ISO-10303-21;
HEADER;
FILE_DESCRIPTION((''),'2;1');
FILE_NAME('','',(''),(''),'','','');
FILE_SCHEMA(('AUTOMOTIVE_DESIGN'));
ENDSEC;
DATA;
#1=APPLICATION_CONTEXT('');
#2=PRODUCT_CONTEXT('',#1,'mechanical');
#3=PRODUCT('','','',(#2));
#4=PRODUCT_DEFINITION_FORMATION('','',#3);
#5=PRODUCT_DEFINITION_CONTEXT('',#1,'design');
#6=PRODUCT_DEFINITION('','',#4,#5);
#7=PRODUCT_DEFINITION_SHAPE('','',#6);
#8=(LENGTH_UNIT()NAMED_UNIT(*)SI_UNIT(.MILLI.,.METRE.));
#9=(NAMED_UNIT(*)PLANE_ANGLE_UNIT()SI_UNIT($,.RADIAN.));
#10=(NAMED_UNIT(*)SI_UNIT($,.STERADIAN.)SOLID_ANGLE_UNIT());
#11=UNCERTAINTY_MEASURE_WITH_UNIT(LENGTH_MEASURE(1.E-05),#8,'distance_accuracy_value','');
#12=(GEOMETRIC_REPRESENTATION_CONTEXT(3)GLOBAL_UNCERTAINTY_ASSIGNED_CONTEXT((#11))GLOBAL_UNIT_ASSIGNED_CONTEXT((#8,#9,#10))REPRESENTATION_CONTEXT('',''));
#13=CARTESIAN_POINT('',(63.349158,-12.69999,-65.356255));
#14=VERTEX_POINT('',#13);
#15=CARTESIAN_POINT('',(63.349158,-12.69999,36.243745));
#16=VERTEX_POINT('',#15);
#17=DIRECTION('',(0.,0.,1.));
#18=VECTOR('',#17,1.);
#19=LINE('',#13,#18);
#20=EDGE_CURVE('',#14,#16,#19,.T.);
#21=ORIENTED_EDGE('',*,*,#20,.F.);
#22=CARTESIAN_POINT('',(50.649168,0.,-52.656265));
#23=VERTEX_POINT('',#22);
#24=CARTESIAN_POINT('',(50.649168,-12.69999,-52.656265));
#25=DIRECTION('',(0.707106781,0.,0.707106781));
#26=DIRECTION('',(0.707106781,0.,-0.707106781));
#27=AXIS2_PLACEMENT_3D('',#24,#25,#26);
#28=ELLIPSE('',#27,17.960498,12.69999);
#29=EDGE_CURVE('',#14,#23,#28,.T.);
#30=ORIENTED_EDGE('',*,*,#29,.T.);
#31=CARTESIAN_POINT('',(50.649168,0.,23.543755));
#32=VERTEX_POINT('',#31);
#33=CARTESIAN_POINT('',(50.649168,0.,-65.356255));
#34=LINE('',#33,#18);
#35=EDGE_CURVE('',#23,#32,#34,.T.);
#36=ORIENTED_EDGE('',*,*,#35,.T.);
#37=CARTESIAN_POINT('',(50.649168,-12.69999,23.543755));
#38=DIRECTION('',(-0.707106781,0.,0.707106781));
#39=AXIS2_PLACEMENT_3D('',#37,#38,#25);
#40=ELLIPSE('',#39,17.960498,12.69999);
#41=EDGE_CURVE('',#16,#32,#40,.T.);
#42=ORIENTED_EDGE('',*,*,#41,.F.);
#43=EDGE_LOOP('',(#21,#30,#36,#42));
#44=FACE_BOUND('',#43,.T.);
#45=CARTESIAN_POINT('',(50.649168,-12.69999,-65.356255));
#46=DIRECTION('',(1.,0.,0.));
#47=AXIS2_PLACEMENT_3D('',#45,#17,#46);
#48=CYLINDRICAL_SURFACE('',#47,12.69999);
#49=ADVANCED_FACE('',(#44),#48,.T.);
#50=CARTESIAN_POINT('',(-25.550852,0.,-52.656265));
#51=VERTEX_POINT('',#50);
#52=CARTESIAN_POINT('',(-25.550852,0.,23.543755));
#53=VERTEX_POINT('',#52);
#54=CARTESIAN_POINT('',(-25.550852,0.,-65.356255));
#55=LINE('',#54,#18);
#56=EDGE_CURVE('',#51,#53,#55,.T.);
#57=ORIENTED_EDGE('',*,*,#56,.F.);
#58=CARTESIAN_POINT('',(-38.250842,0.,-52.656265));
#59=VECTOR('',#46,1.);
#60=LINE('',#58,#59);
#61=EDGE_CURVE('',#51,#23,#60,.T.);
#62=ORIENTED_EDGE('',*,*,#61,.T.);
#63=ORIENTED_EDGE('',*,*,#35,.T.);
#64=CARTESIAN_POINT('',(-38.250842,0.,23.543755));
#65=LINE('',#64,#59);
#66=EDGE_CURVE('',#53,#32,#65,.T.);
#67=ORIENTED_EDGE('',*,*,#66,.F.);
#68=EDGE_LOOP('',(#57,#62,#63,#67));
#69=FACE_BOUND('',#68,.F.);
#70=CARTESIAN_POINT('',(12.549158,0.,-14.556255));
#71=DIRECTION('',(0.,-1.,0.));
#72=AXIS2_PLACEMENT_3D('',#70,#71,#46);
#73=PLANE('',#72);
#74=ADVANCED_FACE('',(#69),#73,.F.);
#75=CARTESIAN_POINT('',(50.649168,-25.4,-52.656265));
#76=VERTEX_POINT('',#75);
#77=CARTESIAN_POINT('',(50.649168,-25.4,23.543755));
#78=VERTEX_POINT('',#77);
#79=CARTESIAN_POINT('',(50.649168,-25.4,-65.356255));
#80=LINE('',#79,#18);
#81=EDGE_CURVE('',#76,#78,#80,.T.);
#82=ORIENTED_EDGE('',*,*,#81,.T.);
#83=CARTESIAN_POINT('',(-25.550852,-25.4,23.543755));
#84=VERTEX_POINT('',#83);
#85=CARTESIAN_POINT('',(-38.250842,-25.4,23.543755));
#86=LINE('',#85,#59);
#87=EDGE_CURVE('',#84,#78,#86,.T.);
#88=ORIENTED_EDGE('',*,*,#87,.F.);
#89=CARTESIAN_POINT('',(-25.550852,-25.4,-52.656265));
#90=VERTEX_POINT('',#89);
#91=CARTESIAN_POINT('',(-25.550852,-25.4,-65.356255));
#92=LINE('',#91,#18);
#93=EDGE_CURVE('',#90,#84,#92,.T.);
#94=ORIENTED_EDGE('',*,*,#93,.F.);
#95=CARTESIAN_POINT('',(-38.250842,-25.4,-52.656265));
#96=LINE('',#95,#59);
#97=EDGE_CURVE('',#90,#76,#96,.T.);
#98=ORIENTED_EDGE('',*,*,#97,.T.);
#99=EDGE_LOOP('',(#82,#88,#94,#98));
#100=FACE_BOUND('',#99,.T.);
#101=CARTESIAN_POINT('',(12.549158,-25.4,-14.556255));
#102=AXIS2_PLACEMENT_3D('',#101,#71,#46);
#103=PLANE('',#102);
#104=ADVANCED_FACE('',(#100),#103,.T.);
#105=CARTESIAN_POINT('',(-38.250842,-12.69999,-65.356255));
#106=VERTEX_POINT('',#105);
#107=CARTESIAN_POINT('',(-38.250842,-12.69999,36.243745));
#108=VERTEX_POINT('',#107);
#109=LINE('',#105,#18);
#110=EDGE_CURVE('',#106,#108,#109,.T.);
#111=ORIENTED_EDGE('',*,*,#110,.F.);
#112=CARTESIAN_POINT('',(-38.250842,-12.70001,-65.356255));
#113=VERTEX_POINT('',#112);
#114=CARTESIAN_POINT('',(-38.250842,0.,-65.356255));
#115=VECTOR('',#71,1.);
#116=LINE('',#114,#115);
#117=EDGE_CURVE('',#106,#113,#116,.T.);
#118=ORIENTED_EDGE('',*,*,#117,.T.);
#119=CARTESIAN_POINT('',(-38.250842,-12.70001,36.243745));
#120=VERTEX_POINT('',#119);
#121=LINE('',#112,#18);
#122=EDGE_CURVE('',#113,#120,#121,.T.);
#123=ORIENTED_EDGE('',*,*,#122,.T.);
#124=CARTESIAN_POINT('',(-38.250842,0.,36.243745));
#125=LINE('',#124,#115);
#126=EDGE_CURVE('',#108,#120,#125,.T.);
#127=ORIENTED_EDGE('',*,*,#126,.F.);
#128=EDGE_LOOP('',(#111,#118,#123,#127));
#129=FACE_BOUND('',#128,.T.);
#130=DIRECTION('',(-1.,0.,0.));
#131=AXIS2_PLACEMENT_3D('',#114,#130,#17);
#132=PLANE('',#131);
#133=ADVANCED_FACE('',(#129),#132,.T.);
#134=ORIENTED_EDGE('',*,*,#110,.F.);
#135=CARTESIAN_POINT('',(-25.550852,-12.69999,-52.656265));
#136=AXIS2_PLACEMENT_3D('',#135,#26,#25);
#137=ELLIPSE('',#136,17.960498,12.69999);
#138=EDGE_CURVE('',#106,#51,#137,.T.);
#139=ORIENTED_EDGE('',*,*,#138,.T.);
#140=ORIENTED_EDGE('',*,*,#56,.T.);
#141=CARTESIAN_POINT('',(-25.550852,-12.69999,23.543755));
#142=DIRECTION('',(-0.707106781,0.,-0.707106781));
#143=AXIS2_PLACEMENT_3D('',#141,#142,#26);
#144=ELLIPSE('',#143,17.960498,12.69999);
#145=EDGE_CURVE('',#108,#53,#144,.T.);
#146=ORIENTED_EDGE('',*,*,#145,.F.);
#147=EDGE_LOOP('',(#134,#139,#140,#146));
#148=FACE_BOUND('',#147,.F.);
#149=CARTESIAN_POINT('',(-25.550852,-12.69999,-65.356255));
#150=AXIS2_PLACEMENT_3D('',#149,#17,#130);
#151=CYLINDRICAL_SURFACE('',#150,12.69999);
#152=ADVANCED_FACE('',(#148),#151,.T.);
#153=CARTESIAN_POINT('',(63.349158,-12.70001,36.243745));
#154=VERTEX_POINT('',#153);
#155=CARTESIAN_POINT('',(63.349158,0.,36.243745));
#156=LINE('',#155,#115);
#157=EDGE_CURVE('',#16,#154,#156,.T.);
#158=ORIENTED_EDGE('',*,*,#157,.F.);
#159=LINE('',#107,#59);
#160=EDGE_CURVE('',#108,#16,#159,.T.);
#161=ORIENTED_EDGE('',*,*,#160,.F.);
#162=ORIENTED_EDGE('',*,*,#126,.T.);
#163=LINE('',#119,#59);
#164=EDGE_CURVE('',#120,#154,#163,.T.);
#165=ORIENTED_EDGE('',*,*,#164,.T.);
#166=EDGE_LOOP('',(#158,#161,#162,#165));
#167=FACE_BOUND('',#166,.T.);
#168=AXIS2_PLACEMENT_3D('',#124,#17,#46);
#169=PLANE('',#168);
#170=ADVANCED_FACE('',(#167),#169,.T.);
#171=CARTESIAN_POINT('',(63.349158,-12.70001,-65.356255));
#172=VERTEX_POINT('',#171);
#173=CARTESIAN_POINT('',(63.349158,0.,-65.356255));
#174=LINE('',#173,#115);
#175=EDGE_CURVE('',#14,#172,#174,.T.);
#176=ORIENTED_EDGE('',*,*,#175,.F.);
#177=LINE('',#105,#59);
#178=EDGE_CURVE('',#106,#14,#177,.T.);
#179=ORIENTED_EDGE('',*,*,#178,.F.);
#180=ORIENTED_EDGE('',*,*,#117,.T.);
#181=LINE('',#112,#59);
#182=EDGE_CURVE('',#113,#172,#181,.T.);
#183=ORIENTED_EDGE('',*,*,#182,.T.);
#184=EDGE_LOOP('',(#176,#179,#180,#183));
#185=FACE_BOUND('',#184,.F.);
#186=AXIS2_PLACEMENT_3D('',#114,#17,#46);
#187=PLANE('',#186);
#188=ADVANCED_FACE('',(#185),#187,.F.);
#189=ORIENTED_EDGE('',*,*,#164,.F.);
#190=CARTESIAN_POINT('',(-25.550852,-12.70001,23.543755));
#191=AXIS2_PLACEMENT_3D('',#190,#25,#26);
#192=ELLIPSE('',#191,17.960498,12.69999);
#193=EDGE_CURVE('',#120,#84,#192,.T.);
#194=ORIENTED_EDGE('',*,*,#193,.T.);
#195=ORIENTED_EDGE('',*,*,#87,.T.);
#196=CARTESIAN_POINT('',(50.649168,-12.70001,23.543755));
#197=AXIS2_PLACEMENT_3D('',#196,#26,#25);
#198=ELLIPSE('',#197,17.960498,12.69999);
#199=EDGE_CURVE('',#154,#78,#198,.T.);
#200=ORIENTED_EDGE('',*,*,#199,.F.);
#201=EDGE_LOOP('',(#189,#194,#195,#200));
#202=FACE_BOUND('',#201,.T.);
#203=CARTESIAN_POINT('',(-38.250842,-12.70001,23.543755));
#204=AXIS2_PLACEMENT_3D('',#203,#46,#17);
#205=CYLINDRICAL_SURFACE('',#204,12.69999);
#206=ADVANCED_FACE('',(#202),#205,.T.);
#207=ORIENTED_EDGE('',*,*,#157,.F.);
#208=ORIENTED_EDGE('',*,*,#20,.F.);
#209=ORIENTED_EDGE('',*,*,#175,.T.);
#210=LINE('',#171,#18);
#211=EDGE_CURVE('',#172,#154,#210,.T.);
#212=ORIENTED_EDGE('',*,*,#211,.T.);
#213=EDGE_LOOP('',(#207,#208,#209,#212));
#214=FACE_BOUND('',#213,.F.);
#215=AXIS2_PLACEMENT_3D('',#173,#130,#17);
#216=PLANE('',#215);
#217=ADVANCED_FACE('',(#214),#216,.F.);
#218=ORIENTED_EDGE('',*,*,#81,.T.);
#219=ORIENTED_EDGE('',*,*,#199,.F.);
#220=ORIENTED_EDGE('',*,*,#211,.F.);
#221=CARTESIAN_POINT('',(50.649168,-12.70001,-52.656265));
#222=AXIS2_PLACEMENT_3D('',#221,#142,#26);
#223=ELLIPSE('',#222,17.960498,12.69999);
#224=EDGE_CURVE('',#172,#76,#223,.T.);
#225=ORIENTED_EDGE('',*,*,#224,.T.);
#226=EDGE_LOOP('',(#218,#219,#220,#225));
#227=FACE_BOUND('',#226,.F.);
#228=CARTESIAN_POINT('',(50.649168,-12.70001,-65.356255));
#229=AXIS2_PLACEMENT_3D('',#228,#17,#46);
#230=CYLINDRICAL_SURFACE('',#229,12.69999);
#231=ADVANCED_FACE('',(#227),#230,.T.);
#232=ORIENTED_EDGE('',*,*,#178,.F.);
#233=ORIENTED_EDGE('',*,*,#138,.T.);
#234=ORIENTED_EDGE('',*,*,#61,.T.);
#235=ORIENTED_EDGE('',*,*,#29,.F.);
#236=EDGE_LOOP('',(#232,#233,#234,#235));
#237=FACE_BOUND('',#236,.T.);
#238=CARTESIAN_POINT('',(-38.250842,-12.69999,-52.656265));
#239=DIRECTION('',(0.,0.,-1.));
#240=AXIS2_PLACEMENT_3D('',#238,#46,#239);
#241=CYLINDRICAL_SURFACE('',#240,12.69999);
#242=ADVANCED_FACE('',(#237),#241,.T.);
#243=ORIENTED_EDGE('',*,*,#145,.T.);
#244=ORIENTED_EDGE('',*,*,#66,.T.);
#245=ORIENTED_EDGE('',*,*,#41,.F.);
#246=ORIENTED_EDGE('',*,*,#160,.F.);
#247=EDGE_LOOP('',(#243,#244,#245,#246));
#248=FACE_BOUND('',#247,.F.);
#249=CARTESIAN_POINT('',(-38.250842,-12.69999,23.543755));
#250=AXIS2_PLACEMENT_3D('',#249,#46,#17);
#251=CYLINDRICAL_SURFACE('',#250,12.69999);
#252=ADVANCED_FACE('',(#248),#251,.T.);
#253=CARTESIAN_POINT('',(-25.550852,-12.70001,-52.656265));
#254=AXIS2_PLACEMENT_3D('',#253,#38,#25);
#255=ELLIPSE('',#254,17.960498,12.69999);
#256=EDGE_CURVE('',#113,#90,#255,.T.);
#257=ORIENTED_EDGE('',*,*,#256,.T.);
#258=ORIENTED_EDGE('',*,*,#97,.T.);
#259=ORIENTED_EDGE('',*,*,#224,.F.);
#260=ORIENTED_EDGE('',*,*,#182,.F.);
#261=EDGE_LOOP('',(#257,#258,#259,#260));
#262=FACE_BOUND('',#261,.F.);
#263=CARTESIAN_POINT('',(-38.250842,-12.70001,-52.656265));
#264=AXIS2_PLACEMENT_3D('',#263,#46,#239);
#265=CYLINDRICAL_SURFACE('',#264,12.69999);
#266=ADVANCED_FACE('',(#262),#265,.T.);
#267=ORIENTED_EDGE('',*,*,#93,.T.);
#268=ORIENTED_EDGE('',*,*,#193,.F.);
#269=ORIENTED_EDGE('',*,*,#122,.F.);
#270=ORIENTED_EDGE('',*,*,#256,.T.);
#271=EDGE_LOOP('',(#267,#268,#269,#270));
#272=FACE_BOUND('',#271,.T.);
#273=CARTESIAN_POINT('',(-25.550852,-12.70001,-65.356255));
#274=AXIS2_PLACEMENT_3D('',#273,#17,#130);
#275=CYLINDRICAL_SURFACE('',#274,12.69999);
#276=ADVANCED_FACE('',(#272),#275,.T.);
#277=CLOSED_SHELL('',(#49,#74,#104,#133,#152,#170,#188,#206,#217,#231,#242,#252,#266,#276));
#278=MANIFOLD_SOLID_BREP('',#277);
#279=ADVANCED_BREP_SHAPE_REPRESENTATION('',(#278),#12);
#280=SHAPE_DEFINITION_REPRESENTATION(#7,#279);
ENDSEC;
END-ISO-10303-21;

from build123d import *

# Parameters (mm, degrees)
F0_W     = 101.6
F0_H     = 101.6
F1_DEPTH = 25.4
F2_R     = 12.69999


# Not quite as in the source:
# - a fillet or chamfer is up to 0.001 mm smaller than in the source, because OpenCascade refuses the exact size


with BuildPart() as f1:
    # F0 (on Front) → F1 (new body)
    with BuildSketch(Plane.XZ):
        with Locations((12.5491575718, -14.5562545776)):
            Rectangle(F0_W, F0_H)
    extrude(amount=F1_DEPTH)

    # F2 (radius 12.7 in the source; OpenCascade refuses exactly that, so slightly less here)
    f2_edges = [f1.edges().sort_by_distance(p)[0] for p in [
        (12.549158, 0, -65.356255),
        (63.349158, 0, -14.556255),
        (12.549158, 0, 36.243745),
        (-38.250842, 0, -14.556255),
        (12.549158, -25.4, -65.356255),
        (63.349158, -25.4, -14.556255),
        (12.549158, -25.4, 36.243745),
        (-38.250842, -25.4, -14.556255),
    ]]
    fillet(f2_edges, radius=F2_R)


solid = f1.part
